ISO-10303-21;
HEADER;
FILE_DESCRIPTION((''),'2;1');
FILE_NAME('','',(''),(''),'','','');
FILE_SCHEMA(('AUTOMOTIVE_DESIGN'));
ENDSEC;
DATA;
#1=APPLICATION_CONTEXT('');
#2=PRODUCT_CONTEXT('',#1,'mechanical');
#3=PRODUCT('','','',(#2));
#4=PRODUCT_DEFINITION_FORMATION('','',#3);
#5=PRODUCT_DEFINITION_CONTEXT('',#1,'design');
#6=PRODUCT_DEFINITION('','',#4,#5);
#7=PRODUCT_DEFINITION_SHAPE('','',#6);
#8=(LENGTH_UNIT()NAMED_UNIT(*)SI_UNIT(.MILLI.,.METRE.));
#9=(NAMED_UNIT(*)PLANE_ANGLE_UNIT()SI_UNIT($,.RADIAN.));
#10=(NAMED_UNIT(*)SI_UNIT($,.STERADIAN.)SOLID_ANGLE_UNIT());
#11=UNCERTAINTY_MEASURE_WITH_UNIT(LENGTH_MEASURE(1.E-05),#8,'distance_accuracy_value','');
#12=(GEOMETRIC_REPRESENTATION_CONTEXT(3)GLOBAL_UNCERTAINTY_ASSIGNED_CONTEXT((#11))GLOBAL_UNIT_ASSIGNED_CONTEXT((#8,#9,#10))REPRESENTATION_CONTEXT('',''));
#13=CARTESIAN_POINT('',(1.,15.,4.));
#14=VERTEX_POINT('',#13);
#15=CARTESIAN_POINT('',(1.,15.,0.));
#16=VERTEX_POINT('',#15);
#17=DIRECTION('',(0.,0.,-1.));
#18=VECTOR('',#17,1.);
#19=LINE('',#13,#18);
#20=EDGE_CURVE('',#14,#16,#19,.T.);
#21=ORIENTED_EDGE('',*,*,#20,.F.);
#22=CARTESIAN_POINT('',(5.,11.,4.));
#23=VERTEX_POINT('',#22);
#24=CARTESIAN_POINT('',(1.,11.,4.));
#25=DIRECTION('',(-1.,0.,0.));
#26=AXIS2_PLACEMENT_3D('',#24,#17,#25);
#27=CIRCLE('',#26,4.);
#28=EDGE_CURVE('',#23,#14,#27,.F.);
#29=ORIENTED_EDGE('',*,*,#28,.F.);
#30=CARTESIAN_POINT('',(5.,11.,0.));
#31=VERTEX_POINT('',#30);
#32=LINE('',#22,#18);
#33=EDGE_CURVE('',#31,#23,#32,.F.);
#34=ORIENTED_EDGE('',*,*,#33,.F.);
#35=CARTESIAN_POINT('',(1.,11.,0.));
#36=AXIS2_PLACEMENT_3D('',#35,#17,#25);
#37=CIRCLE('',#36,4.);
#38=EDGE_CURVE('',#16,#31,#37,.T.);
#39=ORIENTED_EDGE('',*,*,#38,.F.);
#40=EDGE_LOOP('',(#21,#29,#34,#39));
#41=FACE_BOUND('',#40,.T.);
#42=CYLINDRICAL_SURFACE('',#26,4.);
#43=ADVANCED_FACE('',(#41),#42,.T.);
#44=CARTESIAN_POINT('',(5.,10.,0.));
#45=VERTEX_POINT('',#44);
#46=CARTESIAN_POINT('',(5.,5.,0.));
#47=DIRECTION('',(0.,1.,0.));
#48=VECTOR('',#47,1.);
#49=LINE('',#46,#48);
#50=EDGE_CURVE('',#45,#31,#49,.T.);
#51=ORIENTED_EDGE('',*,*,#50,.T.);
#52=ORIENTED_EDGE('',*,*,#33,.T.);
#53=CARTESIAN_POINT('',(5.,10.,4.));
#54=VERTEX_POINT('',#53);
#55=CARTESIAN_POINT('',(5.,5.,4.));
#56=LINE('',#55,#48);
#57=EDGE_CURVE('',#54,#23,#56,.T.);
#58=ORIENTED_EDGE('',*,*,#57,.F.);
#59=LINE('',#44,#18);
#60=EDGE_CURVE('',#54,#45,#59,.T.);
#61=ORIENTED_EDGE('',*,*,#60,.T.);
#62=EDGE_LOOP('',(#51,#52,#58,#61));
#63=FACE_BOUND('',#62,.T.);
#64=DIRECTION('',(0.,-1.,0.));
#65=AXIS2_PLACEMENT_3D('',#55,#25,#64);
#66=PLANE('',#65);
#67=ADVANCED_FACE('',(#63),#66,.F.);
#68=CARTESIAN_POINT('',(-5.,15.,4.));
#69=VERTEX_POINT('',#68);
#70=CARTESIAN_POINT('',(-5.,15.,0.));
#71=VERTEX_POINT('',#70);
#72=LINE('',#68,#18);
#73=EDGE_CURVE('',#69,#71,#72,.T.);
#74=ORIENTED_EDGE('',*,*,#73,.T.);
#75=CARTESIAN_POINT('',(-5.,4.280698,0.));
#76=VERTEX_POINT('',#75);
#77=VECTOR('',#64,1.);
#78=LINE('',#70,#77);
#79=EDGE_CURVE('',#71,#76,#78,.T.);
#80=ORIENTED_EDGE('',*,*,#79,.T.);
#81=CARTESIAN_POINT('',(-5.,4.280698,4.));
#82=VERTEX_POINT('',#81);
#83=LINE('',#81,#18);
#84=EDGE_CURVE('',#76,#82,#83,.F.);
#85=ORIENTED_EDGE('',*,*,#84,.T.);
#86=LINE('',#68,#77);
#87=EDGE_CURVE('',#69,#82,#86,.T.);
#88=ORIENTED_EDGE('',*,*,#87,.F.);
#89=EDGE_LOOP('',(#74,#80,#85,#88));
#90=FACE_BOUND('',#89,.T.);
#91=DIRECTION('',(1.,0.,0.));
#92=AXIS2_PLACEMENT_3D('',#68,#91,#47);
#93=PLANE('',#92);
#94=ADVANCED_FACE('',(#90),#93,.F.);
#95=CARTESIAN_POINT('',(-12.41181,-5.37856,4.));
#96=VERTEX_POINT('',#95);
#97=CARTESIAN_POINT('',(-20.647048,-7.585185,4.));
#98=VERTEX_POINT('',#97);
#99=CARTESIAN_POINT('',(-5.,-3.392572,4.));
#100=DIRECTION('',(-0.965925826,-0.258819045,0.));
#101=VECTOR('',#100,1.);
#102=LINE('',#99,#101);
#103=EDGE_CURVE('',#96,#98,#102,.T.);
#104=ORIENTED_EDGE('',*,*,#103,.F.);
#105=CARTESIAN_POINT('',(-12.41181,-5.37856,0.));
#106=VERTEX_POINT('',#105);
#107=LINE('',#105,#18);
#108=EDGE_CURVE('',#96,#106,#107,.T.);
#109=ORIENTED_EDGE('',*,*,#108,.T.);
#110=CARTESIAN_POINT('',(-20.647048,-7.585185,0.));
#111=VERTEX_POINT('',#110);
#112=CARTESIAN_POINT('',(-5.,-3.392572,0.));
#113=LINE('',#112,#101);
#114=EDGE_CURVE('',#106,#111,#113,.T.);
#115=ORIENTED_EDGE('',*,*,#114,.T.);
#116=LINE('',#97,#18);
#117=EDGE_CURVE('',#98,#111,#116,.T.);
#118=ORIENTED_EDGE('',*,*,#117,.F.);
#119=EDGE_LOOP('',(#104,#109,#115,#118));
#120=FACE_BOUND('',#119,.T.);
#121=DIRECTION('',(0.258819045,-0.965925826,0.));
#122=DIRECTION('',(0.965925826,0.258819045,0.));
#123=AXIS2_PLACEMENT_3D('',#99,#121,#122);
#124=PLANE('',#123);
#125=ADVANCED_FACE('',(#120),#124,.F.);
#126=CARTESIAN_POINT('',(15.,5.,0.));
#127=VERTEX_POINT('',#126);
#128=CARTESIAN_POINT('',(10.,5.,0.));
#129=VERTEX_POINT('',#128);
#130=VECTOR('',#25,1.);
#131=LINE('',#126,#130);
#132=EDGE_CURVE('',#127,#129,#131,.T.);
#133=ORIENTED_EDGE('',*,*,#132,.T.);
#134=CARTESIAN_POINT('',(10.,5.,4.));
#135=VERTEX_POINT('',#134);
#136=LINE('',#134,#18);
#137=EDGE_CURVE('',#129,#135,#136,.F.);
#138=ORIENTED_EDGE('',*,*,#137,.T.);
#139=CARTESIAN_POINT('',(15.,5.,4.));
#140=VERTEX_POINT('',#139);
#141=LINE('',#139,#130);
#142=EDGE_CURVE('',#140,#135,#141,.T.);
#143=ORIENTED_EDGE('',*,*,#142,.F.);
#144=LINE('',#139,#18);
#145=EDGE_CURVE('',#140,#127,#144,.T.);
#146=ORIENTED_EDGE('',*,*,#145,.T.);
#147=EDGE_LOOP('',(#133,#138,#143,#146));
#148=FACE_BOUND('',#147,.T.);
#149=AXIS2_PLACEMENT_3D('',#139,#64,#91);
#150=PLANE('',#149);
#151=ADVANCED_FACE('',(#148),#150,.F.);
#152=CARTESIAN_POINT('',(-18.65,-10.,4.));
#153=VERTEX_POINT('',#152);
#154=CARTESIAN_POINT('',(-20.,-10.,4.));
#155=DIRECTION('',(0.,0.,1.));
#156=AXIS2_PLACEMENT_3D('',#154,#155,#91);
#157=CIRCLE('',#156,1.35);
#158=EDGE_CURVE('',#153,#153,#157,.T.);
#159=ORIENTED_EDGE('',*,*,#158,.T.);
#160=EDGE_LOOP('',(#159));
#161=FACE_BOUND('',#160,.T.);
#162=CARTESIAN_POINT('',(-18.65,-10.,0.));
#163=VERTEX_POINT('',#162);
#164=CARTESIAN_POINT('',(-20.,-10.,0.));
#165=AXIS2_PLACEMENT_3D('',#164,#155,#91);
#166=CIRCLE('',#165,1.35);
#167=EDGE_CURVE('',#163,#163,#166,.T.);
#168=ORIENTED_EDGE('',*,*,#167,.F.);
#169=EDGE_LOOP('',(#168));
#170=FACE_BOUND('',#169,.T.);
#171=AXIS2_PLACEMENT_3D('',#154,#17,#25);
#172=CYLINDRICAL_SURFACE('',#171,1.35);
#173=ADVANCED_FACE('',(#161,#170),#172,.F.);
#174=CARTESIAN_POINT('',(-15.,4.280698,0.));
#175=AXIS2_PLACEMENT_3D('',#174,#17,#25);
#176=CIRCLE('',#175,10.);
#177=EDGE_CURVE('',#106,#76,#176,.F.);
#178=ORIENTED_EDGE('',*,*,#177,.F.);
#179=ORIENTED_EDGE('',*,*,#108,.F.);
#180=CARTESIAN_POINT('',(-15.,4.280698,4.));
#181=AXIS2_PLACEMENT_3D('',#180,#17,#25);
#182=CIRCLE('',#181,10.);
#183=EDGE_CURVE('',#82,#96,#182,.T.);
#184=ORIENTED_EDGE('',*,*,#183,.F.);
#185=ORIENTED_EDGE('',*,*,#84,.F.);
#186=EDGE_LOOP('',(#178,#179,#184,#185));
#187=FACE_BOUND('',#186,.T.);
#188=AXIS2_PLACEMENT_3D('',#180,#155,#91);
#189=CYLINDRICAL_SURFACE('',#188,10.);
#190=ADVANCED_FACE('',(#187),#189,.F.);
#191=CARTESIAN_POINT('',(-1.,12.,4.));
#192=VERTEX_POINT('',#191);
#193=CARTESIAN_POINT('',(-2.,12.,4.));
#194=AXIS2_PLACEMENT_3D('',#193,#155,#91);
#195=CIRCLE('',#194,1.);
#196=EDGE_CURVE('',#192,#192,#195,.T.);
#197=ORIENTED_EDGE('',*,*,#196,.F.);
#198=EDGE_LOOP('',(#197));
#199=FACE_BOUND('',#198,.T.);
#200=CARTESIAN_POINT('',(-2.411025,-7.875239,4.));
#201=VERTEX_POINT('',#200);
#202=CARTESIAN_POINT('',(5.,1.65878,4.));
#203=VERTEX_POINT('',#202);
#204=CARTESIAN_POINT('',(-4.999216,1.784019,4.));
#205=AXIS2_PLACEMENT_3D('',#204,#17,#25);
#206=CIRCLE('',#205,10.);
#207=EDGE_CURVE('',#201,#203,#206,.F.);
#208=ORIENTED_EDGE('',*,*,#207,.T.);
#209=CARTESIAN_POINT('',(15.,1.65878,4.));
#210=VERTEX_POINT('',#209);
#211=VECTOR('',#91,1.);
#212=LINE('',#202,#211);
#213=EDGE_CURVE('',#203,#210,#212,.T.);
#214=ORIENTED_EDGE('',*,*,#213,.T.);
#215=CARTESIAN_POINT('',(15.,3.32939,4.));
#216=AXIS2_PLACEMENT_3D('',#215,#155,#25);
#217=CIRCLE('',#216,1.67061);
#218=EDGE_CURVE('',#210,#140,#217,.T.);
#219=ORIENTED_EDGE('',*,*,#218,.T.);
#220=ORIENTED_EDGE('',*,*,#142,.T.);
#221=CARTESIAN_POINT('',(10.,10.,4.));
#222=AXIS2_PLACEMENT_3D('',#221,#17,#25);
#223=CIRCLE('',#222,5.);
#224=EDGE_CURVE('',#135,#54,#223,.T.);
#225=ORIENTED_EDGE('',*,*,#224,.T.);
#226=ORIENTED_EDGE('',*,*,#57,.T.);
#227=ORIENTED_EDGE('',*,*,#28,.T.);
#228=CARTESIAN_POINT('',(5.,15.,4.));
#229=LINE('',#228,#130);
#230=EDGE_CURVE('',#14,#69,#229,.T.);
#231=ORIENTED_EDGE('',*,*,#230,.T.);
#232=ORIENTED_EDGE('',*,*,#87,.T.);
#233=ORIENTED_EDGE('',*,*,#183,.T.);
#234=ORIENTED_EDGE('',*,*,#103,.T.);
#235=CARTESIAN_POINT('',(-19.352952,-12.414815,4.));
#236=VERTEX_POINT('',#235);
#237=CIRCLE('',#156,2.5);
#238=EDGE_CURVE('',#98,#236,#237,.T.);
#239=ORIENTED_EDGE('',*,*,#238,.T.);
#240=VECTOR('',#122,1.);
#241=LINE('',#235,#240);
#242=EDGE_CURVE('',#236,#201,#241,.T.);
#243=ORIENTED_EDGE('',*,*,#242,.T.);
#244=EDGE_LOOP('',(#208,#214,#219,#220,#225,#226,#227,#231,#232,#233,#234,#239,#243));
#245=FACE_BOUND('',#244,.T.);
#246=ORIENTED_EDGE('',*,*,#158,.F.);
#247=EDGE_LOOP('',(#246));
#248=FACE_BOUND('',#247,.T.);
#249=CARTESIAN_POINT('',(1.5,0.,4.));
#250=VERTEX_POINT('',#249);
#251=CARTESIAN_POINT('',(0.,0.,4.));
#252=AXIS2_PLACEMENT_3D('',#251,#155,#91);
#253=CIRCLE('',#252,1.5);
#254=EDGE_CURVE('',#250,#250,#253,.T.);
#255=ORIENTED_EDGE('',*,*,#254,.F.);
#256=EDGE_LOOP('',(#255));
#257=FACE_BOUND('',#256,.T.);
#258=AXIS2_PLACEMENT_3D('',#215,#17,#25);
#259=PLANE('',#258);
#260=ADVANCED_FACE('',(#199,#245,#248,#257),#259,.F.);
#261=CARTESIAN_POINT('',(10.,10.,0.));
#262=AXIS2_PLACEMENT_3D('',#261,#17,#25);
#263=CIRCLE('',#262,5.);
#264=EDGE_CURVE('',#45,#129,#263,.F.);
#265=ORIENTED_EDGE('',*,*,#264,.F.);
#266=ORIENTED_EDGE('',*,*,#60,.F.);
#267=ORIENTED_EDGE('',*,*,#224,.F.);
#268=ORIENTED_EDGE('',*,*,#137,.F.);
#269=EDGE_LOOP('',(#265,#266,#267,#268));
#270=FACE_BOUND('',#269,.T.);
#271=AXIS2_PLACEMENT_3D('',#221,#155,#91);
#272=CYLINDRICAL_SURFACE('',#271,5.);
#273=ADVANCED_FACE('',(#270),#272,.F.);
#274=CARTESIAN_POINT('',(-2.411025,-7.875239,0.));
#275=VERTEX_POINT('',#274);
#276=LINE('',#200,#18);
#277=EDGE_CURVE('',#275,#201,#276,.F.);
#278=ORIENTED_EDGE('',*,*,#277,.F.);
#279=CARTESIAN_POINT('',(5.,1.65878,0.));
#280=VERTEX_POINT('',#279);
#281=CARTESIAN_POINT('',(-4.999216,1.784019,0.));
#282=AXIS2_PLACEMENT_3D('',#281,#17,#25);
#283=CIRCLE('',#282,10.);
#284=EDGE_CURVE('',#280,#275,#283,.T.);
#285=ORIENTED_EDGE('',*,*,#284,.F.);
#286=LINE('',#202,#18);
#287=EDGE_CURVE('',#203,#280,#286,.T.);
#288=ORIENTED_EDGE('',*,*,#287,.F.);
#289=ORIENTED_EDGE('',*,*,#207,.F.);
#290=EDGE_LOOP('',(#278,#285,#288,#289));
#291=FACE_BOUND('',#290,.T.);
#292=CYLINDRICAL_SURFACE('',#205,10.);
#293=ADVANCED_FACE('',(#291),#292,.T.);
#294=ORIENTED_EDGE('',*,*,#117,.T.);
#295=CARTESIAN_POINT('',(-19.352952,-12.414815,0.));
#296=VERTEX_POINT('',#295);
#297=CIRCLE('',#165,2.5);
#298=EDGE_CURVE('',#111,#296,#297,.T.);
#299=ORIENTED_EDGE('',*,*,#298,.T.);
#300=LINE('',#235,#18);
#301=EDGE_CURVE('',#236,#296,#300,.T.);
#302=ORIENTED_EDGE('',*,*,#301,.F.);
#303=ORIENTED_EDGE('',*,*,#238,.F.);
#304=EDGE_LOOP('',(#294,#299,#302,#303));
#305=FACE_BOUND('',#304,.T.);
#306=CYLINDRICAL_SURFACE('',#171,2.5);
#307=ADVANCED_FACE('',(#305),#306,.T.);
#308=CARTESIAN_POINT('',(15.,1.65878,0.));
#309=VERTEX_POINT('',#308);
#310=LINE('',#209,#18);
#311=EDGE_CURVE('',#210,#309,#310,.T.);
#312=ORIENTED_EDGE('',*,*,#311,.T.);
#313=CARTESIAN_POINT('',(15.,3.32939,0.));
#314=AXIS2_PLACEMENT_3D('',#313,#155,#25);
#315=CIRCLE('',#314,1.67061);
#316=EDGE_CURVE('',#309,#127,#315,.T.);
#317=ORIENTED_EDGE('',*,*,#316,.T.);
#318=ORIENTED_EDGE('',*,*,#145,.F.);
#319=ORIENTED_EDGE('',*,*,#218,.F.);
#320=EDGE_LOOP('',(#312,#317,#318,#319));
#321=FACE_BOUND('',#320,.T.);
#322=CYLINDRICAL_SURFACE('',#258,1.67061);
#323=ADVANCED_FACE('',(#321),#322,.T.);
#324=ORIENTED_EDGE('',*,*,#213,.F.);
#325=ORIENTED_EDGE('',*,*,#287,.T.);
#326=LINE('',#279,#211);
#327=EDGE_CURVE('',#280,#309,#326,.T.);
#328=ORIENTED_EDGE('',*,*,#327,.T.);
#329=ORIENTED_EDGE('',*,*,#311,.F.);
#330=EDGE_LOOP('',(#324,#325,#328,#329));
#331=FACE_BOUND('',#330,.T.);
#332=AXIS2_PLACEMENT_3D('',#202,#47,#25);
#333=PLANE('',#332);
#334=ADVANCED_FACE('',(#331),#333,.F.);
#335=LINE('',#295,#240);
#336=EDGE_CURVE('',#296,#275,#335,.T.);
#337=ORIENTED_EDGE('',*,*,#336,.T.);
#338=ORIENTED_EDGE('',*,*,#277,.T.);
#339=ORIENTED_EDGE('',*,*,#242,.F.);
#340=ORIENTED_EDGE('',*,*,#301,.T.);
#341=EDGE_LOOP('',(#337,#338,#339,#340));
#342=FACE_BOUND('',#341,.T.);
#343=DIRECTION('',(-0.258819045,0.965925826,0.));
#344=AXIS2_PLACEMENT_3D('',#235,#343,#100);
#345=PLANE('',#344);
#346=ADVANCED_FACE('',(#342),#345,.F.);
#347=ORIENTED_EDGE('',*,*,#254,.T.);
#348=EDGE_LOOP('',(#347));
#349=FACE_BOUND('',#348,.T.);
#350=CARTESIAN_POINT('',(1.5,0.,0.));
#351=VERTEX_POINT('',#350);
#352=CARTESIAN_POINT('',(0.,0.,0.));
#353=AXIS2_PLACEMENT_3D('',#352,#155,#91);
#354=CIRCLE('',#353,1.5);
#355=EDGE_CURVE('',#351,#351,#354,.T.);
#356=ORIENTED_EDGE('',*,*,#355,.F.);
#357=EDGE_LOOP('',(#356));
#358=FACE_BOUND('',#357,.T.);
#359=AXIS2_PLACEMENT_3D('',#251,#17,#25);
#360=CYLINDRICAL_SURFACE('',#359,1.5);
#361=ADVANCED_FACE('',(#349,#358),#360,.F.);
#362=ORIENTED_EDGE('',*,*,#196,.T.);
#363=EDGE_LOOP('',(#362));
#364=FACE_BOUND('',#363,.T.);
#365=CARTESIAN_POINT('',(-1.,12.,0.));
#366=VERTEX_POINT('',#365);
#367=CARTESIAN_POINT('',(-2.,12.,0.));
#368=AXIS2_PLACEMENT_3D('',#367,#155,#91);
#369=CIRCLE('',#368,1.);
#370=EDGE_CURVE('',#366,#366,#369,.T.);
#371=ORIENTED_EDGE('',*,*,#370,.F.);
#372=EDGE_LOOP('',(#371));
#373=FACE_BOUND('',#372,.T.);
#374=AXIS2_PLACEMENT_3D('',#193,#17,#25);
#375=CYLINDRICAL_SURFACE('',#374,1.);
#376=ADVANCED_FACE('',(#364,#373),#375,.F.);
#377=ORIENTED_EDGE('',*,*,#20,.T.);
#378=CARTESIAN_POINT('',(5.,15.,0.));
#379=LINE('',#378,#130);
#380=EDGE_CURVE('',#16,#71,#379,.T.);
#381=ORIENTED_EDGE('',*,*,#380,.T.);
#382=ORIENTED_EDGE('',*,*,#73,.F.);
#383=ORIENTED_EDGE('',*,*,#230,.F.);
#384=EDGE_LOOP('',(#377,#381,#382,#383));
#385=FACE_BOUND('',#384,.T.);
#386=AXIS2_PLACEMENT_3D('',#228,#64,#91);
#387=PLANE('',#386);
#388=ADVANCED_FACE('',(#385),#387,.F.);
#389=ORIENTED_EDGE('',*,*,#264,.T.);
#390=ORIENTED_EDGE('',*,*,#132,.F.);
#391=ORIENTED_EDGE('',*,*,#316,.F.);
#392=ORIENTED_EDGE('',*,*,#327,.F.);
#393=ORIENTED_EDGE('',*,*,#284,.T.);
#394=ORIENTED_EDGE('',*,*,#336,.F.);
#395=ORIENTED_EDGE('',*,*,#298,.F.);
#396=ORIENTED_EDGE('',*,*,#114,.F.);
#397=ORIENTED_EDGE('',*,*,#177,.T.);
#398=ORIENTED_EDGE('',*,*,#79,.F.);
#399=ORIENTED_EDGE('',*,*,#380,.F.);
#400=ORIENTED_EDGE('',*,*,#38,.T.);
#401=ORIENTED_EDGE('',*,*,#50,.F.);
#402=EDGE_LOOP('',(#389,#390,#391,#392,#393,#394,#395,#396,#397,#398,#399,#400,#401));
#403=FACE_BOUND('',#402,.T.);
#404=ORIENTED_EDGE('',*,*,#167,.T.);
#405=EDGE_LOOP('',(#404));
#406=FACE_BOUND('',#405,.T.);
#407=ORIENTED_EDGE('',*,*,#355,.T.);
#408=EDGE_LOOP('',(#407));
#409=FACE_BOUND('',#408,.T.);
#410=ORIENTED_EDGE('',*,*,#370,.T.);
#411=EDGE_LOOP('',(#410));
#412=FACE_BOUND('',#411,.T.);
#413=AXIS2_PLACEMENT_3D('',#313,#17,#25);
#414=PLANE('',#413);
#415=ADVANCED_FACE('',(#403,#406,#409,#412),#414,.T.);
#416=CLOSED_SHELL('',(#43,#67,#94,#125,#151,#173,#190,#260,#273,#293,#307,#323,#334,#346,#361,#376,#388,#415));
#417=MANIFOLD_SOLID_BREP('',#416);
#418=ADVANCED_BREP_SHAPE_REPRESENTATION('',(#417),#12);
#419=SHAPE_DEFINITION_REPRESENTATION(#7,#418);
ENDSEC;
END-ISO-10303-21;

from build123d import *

# Parameters (mm, degrees)
SKETCH1_R           = 1.5
SKETCH1_R_2         = 1
SKETCH1_R_3         = 1.35
BOSS_EXTRUDE1_DEPTH = 4
FILLET1_R           = 10
FILLET2_R           = 10
FILLET3_R           = 5
FILLET4_R           = 4


with BuildPart() as part:
    # Sketch1 → Boss-Extrude1 (new body)
    with BuildSketch(Plane.XY):
        with BuildLine():
            Line((15, 5), (5, 5))
            Line((5, 5), (5, 15))
            Line((5, 15), (-5, 15))
            Line((-5, 15), (-5, -3.392571663))
            Line((-5, -3.392571663), (-20.647047613, -7.585185434))
            ThreePointArc((-20.647047613, -7.585185434), (-22.414814566, -10.647047613), (-19.352952387, -12.414814566))
            Line((-19.352952387, -12.414814566), (5, -5.88946064))
            Line((5, -5.88946064), (5, 1.658780206))
            Line((5, 1.658780206), (15, 1.658780206))
            ThreePointArc((15, 1.658780206), (16.670609897, 3.329390103), (15, 5))
        make_face()
        Circle(SKETCH1_R, mode=Mode.SUBTRACT)
        with Locations((-2, 12)):
            Circle(SKETCH1_R_2, mode=Mode.SUBTRACT)
        with Locations((-20, -10)):
            Circle(SKETCH1_R_3, mode=Mode.SUBTRACT)
    extrude(amount=BOSS_EXTRUDE1_DEPTH)

    # Fillet1
    # the kernel refuses this fillet: 10 mm, written as the material it takes off along each edge
    with BuildSketch(Plane(origin=(5, -5.88946064, -19.183174699), x_dir=(-0.965925826289069, -0.2588190451025183, 0), z_dir=(0, 0, 1))) as fillet1_piece_1_section:
        with BuildLine():
            CenterArc((FILLET1_R * 0.767326987979, -FILLET1_R), FILLET1_R, 90, 75)
            Line((-FILLET1_R * 0.19859883831, -FILLET1_R * 0.741180954897), (0, 0))
            Line((0, 0), (FILLET1_R * 0.767326987979, 0))
        make_face()
    fillet1_piece_1 = extrude(amount=42.366349399, mode=Mode.PRIVATE)
    fillet1_piece_1 = split(fillet1_piece_1, bisect_by=Plane(origin=(3.36090957, 1.658780206, 2), z_dir=(0, -1, 0)), keep=Keep.TOP, mode=Mode.PRIVATE)
    add(fillet1_piece_1, mode=Mode.SUBTRACT)

    # Fillet2
    fillet2_edges = [part.edges().sort_by_distance(p)[0] for p in [
        (-5, -3.392571663, 2),
    ]]
    fillet(fillet2_edges, radius=FILLET2_R)

    # Fillet3
    fillet3_edges = [part.edges().sort_by_distance(p)[0] for p in [
        (5, 5, 2),
    ]]
    fillet(fillet3_edges, radius=FILLET3_R)

    # Fillet4
    fillet4_edges = [part.edges().sort_by_distance(p)[0] for p in [
        (5, 15, 2),
    ]]
    fillet(fillet4_edges, radius=FILLET4_R)


solid = part.part
